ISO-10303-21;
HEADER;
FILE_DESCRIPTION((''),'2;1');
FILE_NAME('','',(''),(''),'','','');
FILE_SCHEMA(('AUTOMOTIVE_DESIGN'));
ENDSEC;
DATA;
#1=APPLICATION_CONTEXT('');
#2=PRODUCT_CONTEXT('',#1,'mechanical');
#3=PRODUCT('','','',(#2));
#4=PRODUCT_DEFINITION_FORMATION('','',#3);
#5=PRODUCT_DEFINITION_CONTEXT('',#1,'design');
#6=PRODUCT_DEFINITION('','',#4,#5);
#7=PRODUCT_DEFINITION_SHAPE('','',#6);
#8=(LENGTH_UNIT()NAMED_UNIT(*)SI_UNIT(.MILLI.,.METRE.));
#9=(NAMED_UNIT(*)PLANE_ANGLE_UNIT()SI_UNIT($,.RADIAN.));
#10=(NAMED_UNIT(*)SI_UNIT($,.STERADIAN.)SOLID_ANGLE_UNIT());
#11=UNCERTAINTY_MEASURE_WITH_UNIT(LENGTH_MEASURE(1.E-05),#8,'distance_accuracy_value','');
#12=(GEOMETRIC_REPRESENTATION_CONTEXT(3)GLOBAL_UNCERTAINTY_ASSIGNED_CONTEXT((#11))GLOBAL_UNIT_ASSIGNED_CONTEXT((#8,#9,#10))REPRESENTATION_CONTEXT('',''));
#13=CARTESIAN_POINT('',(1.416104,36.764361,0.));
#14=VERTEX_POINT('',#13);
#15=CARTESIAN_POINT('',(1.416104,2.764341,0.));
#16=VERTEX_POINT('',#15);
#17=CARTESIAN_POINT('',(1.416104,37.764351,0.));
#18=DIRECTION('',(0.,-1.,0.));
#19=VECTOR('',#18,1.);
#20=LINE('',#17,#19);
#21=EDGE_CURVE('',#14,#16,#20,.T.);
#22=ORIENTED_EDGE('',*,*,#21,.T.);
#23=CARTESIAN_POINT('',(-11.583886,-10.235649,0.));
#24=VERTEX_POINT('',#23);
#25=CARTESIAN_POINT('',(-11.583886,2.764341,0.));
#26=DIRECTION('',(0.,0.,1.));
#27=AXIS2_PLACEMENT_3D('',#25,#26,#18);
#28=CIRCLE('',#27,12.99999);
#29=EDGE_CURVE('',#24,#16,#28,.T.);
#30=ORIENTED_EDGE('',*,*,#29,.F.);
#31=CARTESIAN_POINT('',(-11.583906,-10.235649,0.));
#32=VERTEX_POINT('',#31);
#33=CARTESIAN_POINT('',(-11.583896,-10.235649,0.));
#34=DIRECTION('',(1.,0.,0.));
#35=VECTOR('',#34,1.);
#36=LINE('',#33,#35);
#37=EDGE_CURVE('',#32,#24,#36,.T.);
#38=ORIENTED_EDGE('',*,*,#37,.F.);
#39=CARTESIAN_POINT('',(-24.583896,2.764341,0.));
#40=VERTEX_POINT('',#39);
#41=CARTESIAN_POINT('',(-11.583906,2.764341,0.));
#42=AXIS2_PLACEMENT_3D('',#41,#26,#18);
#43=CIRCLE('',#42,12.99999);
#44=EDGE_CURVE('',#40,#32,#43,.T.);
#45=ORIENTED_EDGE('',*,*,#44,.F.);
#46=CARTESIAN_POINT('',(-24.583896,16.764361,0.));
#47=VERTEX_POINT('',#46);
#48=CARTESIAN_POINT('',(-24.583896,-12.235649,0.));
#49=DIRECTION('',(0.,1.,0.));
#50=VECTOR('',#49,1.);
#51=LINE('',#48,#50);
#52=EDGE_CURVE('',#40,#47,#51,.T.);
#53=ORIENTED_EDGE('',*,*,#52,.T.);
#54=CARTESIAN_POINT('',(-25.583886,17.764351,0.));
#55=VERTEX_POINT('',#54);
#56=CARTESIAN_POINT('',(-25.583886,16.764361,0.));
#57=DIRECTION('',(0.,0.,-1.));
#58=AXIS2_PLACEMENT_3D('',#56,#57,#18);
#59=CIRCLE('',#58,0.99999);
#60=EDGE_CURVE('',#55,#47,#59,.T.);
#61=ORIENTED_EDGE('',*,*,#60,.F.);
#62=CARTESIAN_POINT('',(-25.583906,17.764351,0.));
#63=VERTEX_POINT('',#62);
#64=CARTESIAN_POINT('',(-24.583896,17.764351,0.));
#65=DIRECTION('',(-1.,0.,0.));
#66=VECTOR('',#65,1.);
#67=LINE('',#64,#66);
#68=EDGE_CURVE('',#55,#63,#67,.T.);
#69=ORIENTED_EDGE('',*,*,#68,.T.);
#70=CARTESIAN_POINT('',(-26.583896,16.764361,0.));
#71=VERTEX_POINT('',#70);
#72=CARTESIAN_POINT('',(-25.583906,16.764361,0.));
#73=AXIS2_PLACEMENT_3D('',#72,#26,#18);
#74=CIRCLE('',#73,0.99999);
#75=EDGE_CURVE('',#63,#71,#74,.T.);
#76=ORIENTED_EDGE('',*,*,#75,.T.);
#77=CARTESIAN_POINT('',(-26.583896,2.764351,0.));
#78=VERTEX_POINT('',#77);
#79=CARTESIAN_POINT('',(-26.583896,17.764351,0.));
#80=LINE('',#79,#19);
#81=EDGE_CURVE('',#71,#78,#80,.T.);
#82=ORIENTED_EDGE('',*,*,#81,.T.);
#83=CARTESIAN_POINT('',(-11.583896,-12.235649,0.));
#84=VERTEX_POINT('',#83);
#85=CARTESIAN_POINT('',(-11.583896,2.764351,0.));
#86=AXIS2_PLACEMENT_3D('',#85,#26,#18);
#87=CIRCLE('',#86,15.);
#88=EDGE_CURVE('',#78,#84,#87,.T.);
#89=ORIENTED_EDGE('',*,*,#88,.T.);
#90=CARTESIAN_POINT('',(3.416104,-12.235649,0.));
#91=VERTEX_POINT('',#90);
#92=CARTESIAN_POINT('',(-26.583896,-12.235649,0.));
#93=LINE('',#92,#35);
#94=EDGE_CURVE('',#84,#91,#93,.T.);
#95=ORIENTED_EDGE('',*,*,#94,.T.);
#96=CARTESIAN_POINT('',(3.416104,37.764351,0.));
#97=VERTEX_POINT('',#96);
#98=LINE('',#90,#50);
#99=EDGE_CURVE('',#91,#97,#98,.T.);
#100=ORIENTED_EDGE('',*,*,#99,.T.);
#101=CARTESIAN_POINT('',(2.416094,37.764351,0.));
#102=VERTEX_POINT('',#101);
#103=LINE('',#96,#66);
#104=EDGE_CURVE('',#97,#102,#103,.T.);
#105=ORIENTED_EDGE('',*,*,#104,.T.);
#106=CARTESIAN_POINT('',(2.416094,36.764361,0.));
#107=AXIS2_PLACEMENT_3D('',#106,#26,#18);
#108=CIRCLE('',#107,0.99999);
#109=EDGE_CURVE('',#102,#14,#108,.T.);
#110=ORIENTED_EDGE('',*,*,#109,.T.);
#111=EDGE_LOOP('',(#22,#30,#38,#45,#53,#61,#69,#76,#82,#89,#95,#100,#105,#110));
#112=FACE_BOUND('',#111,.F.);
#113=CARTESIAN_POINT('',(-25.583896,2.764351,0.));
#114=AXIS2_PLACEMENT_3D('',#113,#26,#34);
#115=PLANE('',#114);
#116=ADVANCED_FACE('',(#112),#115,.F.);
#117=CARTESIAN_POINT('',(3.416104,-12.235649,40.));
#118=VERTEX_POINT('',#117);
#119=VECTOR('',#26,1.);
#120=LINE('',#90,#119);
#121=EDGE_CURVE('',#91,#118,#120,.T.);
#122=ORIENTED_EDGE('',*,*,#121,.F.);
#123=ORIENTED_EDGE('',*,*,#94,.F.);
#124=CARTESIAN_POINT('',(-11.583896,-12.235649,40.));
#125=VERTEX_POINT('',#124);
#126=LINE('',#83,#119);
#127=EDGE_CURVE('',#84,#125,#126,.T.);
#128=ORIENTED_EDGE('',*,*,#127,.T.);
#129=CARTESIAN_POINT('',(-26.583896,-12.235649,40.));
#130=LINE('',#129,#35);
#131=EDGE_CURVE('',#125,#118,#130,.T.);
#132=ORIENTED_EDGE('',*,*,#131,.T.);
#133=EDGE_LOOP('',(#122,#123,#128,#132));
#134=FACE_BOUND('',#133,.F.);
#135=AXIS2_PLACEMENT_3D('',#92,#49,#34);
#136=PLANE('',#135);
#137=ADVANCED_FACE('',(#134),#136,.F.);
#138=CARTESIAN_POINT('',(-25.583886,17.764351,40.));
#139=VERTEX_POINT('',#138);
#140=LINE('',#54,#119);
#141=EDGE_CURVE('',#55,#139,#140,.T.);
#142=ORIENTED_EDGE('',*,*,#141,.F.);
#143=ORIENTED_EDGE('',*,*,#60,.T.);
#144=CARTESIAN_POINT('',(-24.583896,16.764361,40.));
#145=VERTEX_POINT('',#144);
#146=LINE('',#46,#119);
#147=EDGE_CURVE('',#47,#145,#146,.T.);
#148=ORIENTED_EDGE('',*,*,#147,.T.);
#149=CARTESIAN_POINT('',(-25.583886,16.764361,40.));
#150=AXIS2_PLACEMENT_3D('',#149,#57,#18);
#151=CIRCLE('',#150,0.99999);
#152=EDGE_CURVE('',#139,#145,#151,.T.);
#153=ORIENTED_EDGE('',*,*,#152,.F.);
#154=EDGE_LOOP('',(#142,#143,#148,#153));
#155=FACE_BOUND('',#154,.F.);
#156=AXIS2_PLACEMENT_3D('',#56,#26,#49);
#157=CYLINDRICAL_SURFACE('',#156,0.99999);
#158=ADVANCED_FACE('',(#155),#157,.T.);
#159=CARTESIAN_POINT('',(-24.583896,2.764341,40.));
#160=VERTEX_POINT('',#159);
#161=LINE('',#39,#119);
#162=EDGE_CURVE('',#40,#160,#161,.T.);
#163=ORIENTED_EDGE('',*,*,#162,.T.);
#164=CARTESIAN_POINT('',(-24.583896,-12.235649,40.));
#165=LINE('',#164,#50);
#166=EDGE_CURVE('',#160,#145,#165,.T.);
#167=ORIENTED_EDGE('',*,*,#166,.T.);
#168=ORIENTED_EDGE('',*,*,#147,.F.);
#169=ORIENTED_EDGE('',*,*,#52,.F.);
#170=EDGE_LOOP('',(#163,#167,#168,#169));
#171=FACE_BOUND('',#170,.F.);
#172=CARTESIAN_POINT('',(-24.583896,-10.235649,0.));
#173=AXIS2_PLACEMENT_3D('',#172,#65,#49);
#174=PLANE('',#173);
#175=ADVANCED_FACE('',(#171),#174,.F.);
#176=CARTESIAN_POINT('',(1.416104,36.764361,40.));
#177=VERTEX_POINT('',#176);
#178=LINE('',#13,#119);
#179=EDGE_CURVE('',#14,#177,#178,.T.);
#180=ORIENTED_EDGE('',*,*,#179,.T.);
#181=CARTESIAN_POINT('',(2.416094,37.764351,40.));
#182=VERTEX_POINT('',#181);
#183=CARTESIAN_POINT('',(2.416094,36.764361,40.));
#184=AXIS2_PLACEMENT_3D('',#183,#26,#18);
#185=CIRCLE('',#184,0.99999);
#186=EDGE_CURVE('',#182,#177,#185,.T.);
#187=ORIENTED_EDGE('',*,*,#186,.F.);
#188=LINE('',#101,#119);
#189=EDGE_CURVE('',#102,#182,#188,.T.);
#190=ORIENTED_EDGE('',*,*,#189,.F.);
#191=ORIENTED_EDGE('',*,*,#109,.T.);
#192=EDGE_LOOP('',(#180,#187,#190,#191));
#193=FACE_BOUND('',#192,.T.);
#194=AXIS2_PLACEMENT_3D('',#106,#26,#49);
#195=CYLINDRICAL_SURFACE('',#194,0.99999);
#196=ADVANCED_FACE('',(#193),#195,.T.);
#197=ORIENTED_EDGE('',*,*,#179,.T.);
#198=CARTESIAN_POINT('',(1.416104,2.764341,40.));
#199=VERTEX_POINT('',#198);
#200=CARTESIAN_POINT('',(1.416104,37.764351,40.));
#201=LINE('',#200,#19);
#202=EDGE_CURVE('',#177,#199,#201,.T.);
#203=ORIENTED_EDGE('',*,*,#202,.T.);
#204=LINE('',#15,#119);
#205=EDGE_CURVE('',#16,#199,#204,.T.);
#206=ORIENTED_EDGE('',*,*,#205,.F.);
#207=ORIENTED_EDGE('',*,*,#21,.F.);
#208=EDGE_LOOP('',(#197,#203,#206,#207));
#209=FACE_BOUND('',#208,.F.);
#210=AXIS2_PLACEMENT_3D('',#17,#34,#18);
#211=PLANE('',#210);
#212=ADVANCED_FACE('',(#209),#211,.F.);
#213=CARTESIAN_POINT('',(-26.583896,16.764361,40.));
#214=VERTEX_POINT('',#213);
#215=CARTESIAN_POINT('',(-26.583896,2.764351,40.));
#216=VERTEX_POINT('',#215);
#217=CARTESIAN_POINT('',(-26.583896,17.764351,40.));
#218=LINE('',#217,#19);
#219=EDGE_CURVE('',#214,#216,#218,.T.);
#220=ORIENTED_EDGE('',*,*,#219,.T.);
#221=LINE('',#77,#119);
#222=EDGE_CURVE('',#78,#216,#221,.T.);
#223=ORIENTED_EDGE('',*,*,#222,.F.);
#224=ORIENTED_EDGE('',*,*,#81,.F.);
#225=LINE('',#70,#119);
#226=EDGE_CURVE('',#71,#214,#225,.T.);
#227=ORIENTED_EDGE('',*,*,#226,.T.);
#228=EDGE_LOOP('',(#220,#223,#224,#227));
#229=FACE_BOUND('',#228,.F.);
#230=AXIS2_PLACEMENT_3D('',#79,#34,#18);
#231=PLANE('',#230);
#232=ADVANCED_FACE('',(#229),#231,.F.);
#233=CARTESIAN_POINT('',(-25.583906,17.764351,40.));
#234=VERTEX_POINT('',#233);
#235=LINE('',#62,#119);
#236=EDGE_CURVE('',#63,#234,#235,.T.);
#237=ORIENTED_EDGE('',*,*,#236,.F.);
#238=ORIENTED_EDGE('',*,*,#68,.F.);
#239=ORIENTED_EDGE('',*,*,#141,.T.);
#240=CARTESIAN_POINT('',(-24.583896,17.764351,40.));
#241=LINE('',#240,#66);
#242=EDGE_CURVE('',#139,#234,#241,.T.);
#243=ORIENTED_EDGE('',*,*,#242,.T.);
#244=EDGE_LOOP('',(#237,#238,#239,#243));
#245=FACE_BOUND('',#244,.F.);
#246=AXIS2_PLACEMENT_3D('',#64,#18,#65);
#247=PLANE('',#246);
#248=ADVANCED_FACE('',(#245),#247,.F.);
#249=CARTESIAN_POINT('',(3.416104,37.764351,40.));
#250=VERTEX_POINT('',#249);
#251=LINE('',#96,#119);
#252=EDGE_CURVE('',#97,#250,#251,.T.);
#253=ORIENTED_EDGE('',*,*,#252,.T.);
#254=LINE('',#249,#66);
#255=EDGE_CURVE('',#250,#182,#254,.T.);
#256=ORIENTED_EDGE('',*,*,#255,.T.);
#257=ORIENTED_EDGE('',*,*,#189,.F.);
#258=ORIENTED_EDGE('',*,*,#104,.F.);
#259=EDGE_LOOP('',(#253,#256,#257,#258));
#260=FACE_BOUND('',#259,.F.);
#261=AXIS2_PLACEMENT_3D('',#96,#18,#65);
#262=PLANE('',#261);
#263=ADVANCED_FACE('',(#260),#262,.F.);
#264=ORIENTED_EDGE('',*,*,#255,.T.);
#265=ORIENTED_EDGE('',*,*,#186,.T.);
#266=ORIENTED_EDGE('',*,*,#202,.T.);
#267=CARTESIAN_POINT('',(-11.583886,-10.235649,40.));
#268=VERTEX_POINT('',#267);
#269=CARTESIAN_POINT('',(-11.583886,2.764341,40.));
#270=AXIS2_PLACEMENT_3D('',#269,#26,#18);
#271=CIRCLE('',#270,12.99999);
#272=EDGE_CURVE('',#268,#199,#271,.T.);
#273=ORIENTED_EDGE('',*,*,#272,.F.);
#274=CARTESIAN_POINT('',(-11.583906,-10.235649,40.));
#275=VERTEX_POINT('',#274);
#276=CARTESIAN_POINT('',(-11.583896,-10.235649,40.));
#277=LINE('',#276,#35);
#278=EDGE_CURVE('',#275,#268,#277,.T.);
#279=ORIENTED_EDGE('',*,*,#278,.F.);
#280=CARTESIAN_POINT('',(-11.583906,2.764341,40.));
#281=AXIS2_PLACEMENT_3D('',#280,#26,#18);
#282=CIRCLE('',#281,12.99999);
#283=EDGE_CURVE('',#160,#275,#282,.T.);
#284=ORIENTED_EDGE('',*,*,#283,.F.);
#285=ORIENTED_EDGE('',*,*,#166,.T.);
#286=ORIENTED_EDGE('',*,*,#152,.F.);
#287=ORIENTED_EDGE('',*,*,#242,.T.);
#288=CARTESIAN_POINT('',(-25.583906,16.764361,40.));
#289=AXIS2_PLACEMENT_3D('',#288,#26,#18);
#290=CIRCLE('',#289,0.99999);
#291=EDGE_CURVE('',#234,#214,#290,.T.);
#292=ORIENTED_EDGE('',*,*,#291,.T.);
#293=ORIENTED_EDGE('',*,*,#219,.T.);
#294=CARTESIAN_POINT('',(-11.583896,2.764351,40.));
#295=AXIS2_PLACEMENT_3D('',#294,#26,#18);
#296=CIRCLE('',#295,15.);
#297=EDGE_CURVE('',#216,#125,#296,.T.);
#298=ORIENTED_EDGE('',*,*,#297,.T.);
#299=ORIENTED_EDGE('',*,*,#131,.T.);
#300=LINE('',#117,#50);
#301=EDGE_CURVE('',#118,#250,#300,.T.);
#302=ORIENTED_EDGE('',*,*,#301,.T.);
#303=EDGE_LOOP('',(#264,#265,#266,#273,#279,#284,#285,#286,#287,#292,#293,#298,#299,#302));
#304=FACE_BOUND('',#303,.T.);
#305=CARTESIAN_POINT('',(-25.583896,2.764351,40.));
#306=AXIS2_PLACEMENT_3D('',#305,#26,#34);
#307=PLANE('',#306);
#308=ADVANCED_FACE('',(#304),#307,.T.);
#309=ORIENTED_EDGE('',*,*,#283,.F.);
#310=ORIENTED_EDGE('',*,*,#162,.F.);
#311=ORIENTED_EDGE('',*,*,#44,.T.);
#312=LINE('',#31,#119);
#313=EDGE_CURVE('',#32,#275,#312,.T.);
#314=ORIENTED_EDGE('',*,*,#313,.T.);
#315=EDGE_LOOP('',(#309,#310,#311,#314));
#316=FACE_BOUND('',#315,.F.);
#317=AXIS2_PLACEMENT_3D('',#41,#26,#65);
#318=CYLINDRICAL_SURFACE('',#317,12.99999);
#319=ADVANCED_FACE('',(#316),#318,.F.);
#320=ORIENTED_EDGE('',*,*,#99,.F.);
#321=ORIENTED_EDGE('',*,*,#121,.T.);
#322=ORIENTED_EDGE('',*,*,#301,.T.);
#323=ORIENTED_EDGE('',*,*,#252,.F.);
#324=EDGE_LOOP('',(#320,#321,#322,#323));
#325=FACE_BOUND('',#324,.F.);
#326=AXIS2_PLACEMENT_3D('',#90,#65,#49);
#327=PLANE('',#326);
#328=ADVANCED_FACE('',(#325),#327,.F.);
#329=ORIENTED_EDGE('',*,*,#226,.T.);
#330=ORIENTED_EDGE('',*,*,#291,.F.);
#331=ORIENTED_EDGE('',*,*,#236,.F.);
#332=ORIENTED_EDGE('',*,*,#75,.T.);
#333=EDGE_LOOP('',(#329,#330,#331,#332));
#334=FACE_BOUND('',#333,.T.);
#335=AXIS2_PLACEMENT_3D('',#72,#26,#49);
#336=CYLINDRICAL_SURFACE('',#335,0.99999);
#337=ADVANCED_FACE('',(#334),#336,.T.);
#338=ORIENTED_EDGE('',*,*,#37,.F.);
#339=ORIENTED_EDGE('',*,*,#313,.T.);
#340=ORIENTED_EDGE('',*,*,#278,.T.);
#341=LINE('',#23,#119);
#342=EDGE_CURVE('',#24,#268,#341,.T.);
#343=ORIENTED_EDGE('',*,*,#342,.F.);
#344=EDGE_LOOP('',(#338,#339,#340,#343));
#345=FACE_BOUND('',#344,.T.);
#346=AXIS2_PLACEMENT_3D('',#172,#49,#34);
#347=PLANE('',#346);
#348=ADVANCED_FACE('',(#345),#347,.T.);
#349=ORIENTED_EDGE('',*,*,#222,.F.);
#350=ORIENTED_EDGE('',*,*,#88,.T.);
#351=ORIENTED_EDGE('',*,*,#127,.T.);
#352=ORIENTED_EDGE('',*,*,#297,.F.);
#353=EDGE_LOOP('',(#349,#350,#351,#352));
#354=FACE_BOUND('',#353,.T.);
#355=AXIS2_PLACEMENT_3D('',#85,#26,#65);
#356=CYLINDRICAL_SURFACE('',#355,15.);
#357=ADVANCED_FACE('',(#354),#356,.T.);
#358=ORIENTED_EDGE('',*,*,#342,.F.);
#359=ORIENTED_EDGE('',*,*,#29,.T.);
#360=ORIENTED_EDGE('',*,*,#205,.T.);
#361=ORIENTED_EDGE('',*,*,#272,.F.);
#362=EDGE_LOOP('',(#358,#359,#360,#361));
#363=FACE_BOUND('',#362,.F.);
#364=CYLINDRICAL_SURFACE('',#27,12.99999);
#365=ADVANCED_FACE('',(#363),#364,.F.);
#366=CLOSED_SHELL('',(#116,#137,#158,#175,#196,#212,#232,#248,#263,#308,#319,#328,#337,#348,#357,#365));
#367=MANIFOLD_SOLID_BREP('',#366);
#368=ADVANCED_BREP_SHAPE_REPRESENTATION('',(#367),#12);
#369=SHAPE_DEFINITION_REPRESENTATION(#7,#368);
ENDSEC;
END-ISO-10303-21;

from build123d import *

# Parameters (mm, degrees)
F0_W     = 26
F0_H     = 2
F1_DEPTH = 40
F2_R     = 0.99999
F3_R     = 12.99999
F4_R     = 15


# Not quite as in the source:
# - a fillet or chamfer is up to 0.001 mm smaller than in the source, because OpenCascade refuses the exact size


with BuildPart() as f1:
    # F0 (on Top) → F1 (new body)
    with BuildSketch(Plane.XY):
        Polygon((-24.5838956386, 17.7643506003), (-26.5838956386, 17.7643506003), (-26.5838956386, -12.2356493997), (-24.5838956386, -12.2356493997), (-24.5838956386, -10.2356493997), align=None)
        with Locations((-11.5838956386, -11.2356493997)):
            Rectangle(F0_W, F0_H)
        Polygon((1.4161043614, 37.7643506003), (1.4161043614, -10.2356493997), (1.4161043614, -12.2356493997), (3.4161043614, -12.2356493997), (3.4161043614, 37.7643506003), align=None)
    extrude(amount=F1_DEPTH)

    # F2 (radius 1 in the source; OpenCascade refuses exactly that, so slightly less here)
    f2_edges = [f1.edges().sort_by_distance(p)[0] for p in [
        (-26.583896, 17.764351, 20),
        (-24.583896, 17.764351, 20),
        (1.416104, 37.764351, 20),
    ]]
    fillet(f2_edges, radius=F2_R)

    # F3 (radius 13 in the source; OpenCascade refuses exactly that, so slightly less here)
    f3_edges = [f1.edges().sort_by_distance(p)[0] for p in [
        (1.416104, -10.235649, 20),
        (-24.583896, -10.235649, 20),
    ]]
    fillet(f3_edges, radius=F3_R)

    # F4
    f4_edges = [f1.edges().sort_by_distance(p)[0] for p in [
        (-26.583896, -12.235649, 20),
    ]]
    fillet(f4_edges, radius=F4_R)


solid = f1.part
